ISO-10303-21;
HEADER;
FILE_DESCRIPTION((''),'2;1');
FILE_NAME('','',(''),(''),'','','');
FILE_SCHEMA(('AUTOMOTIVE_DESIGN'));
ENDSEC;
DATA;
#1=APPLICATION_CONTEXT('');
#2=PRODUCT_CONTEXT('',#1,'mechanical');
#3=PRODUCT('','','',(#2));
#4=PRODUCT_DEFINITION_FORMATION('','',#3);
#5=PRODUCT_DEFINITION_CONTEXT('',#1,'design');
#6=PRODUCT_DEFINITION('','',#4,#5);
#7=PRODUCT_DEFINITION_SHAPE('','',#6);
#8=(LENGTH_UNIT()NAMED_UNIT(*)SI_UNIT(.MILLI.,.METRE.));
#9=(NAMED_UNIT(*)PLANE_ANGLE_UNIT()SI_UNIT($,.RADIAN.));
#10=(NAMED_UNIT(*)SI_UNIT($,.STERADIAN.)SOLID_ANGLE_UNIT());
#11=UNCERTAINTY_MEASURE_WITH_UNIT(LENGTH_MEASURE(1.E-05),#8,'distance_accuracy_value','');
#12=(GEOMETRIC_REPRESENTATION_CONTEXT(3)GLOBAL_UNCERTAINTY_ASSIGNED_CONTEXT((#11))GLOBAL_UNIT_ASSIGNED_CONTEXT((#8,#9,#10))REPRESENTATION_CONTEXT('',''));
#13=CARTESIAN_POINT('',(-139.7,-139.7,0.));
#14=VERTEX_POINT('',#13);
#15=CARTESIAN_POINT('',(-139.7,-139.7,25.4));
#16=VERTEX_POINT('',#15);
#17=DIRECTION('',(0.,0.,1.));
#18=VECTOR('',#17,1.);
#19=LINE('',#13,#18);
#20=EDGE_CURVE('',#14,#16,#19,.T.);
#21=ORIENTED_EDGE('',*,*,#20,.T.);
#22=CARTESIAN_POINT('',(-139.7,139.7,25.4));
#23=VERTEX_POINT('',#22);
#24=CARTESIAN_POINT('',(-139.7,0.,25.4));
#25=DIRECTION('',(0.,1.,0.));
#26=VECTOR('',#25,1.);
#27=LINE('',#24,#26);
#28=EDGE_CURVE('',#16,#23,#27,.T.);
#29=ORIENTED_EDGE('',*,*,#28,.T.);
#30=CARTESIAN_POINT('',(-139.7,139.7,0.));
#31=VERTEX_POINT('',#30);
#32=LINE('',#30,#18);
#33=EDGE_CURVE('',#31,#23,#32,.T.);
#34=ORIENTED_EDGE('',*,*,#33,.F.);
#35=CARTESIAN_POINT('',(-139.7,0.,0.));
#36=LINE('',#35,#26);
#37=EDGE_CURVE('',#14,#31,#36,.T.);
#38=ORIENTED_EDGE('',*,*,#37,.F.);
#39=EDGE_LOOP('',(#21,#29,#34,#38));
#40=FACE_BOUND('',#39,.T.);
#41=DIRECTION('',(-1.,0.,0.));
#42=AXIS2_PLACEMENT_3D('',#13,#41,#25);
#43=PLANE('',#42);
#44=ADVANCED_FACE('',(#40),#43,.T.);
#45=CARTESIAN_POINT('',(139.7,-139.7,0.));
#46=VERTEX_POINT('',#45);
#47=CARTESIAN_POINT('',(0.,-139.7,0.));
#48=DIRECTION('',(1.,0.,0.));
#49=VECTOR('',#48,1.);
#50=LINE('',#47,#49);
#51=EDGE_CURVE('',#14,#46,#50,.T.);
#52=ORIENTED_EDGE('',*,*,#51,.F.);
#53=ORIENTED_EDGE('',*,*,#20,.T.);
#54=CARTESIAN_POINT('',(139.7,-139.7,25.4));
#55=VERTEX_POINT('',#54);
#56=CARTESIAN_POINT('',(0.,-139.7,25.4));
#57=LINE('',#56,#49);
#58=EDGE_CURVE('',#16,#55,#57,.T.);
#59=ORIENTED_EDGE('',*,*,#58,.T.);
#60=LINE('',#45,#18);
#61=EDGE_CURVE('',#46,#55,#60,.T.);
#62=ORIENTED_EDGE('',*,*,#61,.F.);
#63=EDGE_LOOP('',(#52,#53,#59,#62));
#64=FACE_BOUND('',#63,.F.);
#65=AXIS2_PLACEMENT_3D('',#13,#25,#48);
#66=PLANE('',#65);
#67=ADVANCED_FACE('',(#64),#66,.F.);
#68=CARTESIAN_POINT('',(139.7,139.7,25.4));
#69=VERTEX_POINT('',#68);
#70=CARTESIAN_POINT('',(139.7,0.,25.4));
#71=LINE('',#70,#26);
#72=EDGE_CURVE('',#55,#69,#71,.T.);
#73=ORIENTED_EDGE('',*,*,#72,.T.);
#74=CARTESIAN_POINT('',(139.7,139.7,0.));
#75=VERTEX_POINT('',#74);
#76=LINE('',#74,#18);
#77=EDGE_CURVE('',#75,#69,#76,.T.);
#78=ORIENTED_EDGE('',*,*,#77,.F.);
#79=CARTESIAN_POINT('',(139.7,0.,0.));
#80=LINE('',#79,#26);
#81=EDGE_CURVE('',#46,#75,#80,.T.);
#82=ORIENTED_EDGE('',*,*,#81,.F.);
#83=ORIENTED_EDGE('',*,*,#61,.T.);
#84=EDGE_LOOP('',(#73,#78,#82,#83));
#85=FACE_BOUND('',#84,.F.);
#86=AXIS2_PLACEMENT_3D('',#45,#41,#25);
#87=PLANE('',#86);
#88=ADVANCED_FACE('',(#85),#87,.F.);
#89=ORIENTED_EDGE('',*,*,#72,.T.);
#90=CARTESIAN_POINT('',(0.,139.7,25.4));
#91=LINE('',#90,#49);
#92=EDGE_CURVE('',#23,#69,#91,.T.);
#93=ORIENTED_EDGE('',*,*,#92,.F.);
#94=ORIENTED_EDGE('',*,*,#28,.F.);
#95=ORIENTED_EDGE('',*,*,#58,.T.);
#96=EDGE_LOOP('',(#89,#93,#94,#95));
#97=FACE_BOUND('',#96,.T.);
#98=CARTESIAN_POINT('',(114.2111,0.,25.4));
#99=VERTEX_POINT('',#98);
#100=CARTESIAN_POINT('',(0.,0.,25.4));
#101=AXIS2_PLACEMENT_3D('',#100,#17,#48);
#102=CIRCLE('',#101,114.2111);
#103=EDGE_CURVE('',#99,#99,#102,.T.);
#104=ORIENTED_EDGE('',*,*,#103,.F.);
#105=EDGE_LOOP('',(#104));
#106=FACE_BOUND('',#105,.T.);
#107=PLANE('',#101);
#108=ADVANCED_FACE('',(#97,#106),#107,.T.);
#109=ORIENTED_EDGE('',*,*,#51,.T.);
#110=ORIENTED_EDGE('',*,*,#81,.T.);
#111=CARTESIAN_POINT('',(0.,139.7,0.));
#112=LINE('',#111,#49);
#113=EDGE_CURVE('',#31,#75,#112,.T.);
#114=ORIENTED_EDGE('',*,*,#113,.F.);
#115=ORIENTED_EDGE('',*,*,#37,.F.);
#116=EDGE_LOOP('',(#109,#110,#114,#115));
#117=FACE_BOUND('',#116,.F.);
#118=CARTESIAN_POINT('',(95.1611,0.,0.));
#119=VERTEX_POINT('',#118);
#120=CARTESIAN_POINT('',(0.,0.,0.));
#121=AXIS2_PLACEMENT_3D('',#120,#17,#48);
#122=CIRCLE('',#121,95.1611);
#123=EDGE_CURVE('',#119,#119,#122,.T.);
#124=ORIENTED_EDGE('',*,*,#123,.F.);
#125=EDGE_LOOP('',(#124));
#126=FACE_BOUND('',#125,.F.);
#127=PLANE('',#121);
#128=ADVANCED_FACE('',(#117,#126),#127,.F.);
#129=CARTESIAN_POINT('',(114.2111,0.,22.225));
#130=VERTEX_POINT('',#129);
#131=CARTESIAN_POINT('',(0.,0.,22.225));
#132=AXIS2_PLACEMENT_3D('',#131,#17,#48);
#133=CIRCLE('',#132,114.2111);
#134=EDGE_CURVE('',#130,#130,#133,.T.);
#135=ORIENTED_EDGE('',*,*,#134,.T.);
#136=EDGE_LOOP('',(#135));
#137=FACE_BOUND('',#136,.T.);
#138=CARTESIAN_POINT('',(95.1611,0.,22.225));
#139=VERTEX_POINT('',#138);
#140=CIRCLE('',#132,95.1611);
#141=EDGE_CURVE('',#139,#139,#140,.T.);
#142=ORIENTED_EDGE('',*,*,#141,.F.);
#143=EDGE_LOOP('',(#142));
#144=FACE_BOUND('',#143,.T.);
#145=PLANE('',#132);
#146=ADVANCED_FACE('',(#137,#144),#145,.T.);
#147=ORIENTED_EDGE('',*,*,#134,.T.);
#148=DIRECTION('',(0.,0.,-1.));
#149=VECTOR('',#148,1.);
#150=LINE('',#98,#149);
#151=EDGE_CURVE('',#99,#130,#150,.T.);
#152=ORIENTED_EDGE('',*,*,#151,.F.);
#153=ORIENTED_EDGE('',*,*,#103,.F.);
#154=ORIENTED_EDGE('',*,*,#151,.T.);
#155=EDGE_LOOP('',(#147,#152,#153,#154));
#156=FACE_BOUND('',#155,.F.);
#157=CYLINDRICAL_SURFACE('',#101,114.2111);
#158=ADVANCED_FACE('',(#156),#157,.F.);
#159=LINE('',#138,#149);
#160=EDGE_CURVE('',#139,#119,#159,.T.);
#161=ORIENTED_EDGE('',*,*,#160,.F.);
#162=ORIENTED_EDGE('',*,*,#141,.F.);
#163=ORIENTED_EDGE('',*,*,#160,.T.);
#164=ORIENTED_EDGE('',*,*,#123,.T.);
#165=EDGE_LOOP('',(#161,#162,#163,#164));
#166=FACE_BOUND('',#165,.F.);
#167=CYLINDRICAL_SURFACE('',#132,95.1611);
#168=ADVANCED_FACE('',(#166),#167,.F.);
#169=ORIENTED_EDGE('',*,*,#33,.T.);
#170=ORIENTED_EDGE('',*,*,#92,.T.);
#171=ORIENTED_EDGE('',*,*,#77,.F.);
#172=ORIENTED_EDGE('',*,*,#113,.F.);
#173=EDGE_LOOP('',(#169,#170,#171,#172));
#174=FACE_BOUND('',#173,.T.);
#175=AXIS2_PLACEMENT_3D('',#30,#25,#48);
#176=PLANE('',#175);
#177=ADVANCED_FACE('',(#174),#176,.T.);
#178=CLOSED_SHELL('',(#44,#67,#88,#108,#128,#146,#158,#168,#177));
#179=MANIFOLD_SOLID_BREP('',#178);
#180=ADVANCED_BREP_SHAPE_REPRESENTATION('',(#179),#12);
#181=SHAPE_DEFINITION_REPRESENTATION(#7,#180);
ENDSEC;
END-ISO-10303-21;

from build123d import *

# Parameters (mm, degrees)
F0_W     = 279.4
F0_H     = 279.4
F1_DEPTH = 25.4
F2_R     = 114.2111
F3_DEPTH = 3.175
F4_R     = 95.1611
F5_DEPTH = 22.225


# Not quite as in the source:
# - a feature of the source that left no trace in its solid (it failed there, or was rolled back) is left out


with BuildPart() as f1:
    # F0 (on Top) → F1 (new body)
    with BuildSketch(Plane.XY):
        Rectangle(F0_W, F0_H)
    extrude(amount=F1_DEPTH)

    # F2 (on face) → F3 (cut)
    with BuildSketch(Plane.XY.offset(25.4)):
        Circle(F2_R)
    extrude(amount=-F3_DEPTH, mode=Mode.SUBTRACT)

    # F4 (on face) → F5 (cut)
    with BuildSketch(Plane.XY.offset(22.225)):
        Circle(F4_R)
    extrude(amount=-F5_DEPTH, mode=Mode.SUBTRACT)


solid = f1.part
